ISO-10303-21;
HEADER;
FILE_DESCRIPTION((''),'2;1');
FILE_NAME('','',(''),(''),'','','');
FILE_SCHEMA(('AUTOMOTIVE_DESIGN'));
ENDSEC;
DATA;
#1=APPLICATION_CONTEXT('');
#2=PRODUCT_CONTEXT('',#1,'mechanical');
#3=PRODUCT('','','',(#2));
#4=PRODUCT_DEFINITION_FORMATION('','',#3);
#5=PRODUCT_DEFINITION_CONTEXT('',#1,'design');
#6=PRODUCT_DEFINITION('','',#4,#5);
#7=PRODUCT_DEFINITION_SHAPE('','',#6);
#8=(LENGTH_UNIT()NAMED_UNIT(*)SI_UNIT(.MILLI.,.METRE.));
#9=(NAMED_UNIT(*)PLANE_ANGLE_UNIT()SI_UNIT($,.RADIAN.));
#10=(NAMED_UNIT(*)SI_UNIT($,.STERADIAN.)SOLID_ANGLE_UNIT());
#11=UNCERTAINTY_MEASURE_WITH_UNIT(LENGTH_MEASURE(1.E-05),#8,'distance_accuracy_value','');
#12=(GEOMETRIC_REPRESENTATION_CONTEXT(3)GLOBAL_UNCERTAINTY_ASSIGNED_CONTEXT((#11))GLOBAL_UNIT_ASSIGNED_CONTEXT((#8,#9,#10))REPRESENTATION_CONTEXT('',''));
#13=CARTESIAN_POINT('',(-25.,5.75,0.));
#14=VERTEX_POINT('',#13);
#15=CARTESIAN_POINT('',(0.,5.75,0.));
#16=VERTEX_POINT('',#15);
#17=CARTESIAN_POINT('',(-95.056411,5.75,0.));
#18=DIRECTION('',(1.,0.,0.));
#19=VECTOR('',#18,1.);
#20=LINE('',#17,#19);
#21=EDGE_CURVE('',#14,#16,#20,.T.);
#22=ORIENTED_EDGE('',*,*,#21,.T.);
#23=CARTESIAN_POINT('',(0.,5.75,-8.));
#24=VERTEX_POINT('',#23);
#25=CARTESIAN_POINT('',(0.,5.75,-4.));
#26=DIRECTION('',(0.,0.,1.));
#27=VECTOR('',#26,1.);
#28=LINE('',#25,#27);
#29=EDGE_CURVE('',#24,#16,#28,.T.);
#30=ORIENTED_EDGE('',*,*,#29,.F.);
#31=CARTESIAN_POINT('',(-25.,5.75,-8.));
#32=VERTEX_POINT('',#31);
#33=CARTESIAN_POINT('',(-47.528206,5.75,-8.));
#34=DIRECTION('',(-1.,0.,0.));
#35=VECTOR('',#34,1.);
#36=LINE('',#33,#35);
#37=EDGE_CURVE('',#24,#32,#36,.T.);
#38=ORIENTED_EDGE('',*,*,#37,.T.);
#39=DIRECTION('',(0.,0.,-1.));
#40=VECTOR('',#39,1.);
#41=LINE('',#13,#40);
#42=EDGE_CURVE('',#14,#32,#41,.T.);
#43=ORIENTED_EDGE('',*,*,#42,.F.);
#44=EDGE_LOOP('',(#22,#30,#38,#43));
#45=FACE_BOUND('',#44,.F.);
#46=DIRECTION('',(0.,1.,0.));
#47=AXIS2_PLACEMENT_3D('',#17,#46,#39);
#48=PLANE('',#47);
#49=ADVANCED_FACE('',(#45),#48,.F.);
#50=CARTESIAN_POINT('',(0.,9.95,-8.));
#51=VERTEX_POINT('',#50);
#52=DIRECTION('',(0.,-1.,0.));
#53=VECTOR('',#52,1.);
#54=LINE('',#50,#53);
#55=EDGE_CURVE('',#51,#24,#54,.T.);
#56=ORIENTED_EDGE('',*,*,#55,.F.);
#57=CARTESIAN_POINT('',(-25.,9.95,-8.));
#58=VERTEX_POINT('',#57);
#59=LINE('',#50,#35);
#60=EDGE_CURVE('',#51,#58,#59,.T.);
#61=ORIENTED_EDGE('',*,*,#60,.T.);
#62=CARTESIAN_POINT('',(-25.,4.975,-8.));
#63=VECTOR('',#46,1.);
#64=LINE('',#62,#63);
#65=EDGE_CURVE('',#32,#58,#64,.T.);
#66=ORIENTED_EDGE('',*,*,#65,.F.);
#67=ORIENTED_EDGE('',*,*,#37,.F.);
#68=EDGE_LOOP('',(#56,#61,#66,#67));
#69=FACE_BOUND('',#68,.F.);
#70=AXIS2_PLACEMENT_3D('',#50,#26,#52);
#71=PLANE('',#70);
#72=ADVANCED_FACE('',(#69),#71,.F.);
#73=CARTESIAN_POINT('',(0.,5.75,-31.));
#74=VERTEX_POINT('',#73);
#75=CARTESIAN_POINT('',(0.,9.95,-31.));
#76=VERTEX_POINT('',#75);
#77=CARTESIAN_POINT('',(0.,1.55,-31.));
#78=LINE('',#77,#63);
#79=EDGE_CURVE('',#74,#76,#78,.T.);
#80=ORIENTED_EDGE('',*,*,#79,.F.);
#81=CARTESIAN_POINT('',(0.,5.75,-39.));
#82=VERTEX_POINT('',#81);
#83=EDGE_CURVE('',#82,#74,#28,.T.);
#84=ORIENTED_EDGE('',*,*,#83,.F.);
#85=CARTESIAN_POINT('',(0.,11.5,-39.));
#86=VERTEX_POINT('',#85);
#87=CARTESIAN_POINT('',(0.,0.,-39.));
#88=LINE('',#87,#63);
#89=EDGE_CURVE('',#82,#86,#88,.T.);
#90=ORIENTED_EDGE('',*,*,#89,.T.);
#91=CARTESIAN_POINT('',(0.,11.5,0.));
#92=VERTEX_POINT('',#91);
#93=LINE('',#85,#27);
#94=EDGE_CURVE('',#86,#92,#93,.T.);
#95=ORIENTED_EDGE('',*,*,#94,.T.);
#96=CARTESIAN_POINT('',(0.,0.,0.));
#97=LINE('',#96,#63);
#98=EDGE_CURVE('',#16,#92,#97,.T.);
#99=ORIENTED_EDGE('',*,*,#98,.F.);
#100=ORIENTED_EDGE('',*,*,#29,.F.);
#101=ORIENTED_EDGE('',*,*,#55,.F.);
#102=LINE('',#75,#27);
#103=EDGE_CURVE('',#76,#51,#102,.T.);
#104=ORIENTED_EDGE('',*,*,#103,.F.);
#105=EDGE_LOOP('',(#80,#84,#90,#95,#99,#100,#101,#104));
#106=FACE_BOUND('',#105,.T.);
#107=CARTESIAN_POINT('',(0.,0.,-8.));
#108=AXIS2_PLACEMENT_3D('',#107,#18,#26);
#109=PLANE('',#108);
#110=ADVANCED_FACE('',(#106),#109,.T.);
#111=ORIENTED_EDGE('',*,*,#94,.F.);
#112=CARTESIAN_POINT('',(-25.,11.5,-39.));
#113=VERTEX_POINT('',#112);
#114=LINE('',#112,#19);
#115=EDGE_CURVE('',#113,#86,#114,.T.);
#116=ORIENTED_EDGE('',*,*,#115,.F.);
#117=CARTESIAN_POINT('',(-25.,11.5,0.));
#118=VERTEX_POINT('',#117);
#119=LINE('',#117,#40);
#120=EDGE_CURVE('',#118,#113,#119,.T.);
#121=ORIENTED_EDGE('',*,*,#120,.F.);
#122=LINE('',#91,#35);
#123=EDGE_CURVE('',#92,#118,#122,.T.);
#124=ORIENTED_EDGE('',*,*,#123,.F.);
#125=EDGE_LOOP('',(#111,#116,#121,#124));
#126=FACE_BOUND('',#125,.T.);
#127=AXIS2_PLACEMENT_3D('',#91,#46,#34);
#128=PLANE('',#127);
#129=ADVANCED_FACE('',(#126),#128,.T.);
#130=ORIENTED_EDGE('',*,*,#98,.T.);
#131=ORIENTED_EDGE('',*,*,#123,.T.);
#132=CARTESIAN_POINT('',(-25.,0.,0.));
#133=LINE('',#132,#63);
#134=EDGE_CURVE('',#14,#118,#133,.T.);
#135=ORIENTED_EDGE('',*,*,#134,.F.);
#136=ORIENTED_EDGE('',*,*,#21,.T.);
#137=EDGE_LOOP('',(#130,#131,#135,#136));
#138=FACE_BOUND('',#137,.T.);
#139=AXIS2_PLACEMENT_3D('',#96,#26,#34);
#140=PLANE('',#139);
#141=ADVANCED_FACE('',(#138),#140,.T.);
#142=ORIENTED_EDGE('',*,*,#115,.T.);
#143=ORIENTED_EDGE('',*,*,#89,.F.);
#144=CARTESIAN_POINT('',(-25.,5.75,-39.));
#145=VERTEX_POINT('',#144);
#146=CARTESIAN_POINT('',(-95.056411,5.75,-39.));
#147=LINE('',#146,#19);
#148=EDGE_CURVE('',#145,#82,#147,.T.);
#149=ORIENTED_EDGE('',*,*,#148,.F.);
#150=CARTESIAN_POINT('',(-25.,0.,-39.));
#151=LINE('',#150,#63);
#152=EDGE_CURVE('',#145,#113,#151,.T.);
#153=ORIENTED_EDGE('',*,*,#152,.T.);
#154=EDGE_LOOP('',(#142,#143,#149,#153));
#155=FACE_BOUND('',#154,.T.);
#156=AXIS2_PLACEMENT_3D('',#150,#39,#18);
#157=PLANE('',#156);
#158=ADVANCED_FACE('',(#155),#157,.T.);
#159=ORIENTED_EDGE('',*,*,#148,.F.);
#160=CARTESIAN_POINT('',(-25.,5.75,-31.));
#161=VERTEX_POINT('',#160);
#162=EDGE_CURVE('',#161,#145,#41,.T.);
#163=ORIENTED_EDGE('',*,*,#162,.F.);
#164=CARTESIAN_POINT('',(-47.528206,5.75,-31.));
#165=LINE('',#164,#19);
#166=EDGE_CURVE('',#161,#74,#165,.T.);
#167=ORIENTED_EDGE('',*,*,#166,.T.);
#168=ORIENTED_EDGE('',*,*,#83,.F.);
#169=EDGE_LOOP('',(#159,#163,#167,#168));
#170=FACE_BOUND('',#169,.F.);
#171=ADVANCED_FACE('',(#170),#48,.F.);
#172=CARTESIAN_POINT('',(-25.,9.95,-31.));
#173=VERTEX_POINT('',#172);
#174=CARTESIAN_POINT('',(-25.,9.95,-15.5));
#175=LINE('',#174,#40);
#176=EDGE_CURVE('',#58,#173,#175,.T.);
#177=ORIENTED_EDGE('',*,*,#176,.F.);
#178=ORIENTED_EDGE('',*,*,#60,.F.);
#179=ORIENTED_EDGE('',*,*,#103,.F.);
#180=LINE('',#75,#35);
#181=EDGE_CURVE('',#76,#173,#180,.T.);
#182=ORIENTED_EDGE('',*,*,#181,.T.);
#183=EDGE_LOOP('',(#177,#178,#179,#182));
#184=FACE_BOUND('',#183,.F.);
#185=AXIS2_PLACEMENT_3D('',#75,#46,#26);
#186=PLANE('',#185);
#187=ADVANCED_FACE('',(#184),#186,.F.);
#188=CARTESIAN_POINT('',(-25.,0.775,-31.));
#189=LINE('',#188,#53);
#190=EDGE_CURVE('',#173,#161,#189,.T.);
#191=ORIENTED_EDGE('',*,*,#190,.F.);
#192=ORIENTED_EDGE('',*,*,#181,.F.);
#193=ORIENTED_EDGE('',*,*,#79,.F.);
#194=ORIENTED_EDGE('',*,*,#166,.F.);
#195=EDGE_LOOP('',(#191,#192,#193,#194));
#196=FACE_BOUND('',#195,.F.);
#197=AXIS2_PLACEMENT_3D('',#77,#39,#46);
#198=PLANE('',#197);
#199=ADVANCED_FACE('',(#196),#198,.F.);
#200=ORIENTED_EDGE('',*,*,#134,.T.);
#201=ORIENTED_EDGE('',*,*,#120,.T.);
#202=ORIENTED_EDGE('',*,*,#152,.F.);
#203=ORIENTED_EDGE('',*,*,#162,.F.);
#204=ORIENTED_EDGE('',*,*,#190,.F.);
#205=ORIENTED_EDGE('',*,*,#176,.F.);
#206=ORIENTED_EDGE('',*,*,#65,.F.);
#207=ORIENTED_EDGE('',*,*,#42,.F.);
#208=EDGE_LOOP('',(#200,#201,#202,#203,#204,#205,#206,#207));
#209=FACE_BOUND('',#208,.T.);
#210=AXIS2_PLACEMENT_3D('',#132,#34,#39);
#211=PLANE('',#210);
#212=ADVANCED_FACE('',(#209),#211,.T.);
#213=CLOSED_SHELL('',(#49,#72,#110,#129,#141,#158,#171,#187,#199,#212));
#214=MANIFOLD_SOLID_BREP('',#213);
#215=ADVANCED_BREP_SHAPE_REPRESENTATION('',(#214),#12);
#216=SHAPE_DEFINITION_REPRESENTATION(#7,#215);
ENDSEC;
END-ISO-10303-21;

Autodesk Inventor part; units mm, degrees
ref_plane "YZ Plane" through (0, 0, 0) normal (1, 0, 0) x (0, 1, 0)
ref_plane "XZ Plane" through (0, 0, 0) normal (0, 1, 0) x (-1, 0, 0)
ref_plane "XY Plane" through (0, 0, 0) normal (0, 0, 1) x (1, 0, 0)
sketch "Sketch1" plane through (0, 0, 0) normal (0, 1, 0) x (-1, 0, 0)
  line L0 (0, 0) -> (25, 0)
  line L1 (25, 0) -> (25, -39)
  line L2 (25, -39) -> (0, -39)
  line L3 (0, -39) -> (0, 0)
  line L4 (0, -8) -> (25, -8)
  line L5 (25, -8) -> (25, -31)
  line L6 (25, -31) -> (0, -31)
  line L7 (0, -31) -> (0, -8)
  dimension "d0" = 39
  dimension "d1" = 25
  dimension "d2" = 23
  dimension "d3" = 8
  dimension "d4" = 8
extrude "Extrusion1" add sketch "Sketch1" along normal blind 11.5
sketch "Sketch3" plane through (0, 0, 0) normal (1, 0, 0) x (0, 0, -1)
  line L0 (0, 0) -> (0, 11.5) projected
  line L1 (0, 0) -> (39, 0) projected
  line L2 (8, 1.55) -> (31, 1.55)
  line L3 (31, 1.55) -> (31, 9.95)
  line L4 (31, 9.95) -> (8, 9.95)
  line L5 (8, 9.95) -> (8, 1.55)
  line L6 (8, 1.55) -> (31, 9.95) construction
  line L7 (31, 1.55) -> (8, 9.95) construction
  point P0 (0, 5.75)
  point P1 (19.5, 0)
  point P2 (19.5, 5.75)
  dimension "d9" = 23
  dimension "d10" = 8.4
  dimension "d25" = 8
extrude "Extrusion2" cut sketch "Sketch3" against normal through all
sketch "Sketch4" plane through (0, 0, 0) normal (1, 0, 0) x (0, 0, -1)
  line L0 (0, 0) -> (0, 11.5) projected
  line L1 (0, 5.75) -> (39, 5.75)
  line L2 (39, 0) -> (39, 11.5) projected
split body "Split1" sketch "Sketch4" result one side removed curves L1 removed pieces at (-8.3333, 0.5, -13)
properties part number "Servo mount top v2"
